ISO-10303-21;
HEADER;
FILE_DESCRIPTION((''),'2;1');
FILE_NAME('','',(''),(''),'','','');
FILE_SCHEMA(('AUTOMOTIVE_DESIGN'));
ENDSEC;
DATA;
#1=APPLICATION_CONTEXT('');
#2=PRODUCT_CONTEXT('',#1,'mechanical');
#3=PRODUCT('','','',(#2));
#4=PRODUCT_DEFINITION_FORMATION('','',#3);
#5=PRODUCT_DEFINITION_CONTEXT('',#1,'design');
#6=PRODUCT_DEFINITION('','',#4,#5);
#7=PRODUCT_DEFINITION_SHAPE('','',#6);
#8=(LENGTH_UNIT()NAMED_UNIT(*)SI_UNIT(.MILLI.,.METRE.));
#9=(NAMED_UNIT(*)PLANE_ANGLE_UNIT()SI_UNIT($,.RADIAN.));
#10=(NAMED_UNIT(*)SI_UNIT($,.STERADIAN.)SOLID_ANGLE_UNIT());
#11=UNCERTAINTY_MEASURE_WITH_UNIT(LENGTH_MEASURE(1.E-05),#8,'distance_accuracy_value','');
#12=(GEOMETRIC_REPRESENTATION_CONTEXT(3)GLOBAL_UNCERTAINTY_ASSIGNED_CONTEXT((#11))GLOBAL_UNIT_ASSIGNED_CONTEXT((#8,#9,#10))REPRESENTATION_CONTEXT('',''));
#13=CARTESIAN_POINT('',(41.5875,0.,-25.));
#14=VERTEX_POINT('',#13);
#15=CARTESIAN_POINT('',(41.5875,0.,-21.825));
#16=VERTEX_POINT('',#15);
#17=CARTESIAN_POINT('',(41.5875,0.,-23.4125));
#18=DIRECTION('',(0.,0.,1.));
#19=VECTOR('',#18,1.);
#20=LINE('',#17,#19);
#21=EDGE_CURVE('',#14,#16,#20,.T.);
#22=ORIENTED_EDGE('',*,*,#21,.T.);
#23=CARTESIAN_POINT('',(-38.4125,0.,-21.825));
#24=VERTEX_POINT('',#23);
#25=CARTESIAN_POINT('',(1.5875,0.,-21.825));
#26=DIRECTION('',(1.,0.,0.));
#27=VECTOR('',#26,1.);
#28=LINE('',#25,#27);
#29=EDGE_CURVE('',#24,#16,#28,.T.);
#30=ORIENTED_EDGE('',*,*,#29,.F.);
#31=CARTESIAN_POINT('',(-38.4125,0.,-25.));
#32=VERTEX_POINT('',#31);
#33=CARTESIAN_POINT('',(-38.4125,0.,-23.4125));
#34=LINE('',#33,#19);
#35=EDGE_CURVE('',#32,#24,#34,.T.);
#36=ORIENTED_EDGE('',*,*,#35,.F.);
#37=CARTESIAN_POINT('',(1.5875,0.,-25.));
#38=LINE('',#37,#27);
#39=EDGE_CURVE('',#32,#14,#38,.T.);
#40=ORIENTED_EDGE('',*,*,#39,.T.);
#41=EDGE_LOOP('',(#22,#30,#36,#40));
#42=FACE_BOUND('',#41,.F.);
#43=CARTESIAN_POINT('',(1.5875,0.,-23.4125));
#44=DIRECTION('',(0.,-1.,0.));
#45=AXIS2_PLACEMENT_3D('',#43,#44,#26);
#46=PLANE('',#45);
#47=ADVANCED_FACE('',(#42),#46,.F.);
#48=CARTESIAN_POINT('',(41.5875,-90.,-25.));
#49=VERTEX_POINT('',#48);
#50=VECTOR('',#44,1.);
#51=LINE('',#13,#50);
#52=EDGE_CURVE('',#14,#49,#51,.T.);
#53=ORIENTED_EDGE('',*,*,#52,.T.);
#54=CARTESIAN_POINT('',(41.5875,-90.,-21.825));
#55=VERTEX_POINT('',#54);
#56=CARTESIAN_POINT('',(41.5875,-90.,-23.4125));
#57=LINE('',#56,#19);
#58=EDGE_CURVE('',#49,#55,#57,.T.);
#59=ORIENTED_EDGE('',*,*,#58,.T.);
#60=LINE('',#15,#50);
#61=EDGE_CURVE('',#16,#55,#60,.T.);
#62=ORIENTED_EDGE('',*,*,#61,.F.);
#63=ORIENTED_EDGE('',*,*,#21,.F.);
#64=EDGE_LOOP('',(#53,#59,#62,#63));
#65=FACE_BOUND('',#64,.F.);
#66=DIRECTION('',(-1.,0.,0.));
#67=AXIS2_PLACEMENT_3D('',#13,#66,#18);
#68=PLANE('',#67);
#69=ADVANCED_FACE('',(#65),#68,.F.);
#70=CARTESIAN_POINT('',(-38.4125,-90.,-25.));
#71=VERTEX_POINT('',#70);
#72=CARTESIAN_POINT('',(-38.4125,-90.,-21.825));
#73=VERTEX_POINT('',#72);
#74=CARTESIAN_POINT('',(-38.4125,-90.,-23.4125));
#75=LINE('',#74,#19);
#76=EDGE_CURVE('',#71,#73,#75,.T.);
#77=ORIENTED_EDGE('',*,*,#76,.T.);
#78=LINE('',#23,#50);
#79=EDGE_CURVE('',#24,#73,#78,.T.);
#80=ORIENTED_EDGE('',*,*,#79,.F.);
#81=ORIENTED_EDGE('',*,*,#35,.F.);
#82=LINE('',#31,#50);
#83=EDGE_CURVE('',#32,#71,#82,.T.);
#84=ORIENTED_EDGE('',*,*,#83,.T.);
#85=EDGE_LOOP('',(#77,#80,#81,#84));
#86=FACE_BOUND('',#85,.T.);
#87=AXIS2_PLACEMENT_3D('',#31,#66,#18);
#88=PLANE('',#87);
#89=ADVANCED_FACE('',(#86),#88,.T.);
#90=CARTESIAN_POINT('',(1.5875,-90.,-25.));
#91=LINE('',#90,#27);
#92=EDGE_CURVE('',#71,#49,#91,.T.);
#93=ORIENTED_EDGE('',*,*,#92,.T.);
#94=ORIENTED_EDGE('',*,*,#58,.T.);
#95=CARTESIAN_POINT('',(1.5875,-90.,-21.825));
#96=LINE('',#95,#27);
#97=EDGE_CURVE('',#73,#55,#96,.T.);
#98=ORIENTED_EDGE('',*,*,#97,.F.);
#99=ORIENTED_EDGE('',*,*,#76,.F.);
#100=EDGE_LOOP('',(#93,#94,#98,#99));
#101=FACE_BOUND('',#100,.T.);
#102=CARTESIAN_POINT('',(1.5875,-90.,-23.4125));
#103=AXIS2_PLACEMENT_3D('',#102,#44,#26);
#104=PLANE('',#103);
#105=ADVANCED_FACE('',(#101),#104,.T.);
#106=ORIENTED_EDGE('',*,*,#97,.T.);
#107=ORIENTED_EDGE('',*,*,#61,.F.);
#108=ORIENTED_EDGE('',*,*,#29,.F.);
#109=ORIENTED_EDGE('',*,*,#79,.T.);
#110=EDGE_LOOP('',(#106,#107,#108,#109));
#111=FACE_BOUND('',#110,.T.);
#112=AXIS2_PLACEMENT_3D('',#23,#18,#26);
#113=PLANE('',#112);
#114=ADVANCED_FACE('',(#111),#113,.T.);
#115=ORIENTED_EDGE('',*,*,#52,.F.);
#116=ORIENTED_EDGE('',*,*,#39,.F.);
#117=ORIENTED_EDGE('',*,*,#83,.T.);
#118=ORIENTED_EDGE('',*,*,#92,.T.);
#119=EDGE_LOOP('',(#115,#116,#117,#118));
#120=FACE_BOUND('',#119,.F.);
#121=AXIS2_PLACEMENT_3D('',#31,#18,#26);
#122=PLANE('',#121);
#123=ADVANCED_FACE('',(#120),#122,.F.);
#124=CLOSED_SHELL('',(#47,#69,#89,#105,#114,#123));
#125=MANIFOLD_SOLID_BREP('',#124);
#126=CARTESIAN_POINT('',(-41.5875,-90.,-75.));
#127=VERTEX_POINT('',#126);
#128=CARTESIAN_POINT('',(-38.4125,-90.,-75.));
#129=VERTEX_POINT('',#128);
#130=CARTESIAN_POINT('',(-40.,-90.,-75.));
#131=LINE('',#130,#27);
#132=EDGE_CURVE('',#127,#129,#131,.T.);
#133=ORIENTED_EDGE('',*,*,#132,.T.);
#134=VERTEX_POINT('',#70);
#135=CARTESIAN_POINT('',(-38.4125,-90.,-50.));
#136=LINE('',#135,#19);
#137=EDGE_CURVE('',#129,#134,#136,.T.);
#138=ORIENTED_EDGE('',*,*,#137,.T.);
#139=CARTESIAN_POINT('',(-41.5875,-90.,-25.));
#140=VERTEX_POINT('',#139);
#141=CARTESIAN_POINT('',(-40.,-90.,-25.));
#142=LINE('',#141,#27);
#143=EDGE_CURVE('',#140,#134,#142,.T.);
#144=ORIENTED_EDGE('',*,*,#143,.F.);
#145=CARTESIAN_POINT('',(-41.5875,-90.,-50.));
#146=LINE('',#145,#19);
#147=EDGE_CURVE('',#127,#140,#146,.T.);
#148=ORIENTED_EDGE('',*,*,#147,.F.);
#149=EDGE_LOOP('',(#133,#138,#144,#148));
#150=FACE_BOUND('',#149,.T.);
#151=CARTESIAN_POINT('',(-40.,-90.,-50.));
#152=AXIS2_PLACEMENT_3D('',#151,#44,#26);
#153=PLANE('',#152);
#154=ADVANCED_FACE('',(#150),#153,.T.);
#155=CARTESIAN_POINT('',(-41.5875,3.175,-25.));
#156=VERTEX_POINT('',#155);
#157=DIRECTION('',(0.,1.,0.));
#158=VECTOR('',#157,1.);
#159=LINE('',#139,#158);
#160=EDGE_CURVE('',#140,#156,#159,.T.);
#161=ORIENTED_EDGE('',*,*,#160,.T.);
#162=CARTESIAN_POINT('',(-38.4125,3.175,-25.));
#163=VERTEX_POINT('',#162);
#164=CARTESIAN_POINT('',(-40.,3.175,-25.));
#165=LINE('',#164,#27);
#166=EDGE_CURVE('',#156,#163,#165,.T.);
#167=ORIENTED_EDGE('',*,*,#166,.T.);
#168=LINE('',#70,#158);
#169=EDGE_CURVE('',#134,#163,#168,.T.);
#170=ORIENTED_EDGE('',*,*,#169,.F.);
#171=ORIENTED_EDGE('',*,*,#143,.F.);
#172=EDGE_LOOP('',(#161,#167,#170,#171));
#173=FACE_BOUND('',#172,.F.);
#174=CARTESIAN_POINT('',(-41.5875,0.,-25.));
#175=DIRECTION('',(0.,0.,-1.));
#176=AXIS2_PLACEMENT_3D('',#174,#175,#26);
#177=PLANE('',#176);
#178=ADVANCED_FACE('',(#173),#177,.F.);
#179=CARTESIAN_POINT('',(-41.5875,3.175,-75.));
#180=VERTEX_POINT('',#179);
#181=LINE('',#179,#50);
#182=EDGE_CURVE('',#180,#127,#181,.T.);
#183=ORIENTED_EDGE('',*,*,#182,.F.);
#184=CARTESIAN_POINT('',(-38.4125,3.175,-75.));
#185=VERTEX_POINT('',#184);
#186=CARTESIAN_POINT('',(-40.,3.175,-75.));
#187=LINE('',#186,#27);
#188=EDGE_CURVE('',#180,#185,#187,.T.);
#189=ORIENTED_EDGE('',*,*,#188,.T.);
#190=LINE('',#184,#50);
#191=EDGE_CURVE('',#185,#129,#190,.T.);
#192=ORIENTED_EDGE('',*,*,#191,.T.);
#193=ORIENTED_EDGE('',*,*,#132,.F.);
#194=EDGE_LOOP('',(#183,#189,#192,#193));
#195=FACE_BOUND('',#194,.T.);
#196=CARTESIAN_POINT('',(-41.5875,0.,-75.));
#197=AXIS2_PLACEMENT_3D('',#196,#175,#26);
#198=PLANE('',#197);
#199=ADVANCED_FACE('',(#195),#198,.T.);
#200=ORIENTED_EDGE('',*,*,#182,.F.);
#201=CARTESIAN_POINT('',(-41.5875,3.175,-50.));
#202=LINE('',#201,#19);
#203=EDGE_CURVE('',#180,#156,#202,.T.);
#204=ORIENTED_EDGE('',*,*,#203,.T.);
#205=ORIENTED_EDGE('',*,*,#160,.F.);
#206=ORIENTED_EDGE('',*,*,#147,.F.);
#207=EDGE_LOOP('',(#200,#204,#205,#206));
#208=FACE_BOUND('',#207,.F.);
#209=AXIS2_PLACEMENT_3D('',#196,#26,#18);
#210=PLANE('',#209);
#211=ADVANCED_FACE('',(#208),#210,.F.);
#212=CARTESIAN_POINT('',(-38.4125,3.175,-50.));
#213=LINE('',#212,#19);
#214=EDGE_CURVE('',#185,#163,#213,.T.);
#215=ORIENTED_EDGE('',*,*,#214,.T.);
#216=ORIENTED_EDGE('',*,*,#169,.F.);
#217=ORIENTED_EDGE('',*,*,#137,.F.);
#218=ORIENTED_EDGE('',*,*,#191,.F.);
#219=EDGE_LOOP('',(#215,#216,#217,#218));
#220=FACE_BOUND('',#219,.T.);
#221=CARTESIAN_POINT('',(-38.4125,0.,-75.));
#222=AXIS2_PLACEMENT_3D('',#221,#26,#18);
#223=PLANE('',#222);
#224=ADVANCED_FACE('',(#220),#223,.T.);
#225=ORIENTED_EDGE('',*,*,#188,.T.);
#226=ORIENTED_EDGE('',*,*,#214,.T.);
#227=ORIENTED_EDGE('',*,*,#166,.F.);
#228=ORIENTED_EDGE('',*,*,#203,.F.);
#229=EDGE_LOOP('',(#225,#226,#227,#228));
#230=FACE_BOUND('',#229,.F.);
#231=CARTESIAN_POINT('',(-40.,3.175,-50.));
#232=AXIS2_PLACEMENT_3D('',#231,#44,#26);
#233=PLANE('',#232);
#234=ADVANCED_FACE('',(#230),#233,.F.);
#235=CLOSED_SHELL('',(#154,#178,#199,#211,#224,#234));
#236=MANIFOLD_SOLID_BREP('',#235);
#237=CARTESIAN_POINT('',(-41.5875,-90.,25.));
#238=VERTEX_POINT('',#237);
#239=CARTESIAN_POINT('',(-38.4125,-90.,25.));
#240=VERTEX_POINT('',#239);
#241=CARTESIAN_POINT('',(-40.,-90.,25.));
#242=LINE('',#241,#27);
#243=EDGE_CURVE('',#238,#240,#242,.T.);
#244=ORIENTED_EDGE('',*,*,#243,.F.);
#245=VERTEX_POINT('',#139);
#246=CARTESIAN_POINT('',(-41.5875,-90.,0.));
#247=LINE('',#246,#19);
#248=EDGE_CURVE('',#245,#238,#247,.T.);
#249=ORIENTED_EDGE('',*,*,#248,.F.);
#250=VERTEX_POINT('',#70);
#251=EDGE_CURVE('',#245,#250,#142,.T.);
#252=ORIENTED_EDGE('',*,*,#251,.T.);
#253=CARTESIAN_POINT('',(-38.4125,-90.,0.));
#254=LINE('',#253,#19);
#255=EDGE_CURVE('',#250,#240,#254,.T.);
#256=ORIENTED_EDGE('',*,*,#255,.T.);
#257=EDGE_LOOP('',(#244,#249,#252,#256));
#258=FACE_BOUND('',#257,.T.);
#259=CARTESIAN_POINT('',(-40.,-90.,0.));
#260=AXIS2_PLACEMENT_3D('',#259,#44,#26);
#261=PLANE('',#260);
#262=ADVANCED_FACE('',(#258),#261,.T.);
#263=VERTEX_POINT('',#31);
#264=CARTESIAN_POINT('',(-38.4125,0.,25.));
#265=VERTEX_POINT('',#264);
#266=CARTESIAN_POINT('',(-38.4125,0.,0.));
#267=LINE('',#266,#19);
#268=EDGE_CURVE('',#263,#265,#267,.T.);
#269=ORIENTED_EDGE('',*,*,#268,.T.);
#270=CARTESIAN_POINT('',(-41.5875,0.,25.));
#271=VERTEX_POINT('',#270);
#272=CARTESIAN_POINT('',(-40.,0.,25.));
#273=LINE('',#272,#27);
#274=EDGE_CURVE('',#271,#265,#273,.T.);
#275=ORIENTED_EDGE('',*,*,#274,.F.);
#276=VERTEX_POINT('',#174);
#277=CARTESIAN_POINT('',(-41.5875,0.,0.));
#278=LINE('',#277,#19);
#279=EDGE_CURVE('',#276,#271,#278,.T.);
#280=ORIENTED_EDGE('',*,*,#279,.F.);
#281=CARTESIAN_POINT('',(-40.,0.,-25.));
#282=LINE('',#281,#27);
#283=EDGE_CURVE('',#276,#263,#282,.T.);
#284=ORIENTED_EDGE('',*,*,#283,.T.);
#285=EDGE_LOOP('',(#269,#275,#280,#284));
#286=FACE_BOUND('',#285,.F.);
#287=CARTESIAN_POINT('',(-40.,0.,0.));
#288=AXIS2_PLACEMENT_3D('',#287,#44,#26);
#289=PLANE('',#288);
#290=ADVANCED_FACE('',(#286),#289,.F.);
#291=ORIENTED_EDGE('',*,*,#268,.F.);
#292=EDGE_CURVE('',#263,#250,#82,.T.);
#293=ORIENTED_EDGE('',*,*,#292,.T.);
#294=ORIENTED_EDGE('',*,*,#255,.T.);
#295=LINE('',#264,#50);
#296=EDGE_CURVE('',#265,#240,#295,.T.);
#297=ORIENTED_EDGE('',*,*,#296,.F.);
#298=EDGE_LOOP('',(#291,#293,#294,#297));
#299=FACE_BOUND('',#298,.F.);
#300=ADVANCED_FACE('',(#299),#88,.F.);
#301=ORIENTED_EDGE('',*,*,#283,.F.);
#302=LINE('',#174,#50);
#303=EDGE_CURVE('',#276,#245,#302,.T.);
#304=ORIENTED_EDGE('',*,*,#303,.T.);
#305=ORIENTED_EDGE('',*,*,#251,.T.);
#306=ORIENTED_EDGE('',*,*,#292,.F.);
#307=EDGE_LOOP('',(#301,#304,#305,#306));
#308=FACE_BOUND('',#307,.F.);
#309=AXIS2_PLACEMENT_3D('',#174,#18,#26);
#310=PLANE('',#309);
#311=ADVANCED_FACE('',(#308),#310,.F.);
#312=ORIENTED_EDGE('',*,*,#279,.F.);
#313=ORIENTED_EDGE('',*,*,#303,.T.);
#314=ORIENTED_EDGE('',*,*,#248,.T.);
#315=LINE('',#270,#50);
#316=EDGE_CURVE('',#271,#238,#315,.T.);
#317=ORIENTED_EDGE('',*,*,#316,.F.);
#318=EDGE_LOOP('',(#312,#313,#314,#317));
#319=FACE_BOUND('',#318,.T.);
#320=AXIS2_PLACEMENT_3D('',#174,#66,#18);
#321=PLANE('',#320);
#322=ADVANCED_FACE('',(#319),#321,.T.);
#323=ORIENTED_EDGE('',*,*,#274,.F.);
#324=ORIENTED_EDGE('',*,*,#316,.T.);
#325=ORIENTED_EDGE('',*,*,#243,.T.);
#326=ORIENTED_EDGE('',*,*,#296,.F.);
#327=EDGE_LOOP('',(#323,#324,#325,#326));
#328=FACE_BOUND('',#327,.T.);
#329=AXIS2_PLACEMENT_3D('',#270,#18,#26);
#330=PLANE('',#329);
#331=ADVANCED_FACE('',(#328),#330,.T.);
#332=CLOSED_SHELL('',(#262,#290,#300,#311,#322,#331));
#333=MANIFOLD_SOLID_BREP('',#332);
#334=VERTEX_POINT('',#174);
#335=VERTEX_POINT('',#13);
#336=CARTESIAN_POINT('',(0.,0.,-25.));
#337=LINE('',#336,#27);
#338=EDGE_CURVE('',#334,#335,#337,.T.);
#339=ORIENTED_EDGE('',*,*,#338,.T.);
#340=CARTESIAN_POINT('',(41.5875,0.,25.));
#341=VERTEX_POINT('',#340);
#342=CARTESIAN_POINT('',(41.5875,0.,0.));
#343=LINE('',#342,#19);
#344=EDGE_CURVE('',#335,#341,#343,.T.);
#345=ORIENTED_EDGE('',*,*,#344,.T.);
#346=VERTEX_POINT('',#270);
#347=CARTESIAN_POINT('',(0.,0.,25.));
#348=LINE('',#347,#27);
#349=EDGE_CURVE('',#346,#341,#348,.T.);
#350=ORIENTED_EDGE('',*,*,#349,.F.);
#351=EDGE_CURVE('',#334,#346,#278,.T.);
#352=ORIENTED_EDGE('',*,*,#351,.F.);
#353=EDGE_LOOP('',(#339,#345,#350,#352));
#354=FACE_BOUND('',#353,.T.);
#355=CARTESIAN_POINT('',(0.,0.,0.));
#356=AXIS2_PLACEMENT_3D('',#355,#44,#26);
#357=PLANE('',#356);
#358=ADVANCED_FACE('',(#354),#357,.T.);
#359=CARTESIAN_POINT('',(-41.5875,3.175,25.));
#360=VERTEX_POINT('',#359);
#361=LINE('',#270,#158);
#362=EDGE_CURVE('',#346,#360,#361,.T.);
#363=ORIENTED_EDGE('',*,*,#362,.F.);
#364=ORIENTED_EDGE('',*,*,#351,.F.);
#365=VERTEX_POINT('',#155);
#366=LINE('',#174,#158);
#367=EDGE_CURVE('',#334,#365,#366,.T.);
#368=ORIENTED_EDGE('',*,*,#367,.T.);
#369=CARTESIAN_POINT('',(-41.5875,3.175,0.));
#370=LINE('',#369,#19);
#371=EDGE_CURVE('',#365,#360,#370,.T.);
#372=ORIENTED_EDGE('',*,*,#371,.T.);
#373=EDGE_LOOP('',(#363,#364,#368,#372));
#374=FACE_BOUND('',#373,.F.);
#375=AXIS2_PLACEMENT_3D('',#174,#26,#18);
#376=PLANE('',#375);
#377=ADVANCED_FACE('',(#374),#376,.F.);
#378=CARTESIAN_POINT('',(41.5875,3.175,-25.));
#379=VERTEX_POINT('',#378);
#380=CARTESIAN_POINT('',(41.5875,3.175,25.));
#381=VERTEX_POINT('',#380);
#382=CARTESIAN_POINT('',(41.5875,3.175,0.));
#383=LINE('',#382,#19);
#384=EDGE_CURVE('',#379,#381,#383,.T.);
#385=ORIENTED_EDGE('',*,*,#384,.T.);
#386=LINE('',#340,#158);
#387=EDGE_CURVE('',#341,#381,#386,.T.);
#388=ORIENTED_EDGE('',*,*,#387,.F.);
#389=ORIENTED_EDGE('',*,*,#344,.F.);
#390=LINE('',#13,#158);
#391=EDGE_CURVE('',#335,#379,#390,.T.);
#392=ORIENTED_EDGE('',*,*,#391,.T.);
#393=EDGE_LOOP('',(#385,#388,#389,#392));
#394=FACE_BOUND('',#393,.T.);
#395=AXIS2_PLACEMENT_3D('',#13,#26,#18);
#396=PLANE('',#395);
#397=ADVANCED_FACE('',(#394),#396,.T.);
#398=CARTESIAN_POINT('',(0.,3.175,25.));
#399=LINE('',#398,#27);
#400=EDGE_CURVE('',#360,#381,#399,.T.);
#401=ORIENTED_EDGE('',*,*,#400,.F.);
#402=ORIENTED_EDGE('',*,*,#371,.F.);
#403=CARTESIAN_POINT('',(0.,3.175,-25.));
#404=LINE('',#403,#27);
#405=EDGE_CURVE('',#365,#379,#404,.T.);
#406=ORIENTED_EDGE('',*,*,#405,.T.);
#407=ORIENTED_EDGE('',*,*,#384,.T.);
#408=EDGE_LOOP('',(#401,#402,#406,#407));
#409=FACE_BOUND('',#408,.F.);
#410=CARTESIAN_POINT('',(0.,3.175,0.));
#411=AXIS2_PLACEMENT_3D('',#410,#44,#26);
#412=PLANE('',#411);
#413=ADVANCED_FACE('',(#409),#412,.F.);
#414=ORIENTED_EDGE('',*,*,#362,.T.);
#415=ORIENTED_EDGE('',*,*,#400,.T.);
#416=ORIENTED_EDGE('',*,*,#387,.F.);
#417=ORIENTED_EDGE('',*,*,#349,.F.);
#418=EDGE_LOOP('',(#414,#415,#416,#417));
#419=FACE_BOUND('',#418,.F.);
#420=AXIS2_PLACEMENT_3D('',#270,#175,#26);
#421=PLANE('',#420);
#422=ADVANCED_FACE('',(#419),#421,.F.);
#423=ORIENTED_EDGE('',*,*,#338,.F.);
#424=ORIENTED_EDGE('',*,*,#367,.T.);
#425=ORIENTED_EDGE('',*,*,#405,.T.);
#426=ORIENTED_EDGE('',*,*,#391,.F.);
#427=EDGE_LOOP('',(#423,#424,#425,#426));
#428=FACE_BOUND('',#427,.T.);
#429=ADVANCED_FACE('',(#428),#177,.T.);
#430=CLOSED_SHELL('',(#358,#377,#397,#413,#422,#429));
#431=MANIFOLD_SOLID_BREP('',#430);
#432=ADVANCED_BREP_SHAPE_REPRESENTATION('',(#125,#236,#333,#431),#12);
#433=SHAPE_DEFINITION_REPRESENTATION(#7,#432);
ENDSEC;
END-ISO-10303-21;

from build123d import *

# Parameters (mm, degrees)
F0_W           = 83.175
F0_H           = 50
F1_DEPTH       = 3.175
F2_W           = 3.175
F2_H           = 50
F3_DEPTH       = 90
F4_W           = 3.175
F4_H           = 50
F5_DEPTH       = 80
F6_W           = 80
F6_H           = 3.175
F7_DEPTH       = 90
F8_W           = 80
F8_H           = 3.175
F9_DEPTH       = 80
F10_W          = 3.175
F10_H          = 50
F11_DEPTH      = 90
F11_DEPTH_BACK = 3.175
F12_R          = 2.5
F13_DEPTH      = 3.175


# Not quite as in the source:
# - a length typed as a fraction of an inch, garbled in the dataset ("3 / 203.2 mm" for 3/8 in), is restored
# - a feature names something its author has since deleted; it is built from what else it names


with BuildPart() as f1:
    # F0 (on Front) → F1 (new body)
    with BuildSketch(Plane.XZ):
        Rectangle(F0_W, F0_H)
    extrude(amount=-F1_DEPTH)


with BuildPart() as f3:
    # F2 (on Front) → F3 (new body)
    with BuildSketch(Plane.XZ):
        with Locations((-40, 0)):
            Rectangle(F2_W, F2_H)
    extrude(amount=F3_DEPTH)


with BuildPart() as f5:
    # F4 (on Front) → F5 (new body)
    with BuildSketch(Plane.XZ):
        with Locations((40, 0)):
            Rectangle(F4_W, F4_H)
    extrude(amount=F5_DEPTH)

    # F12 (on face) → F13 (cut, through all)
    with BuildSketch(Plane.YZ.offset(41.5875)):
        with Locations((-40, -15)):
            Circle(F12_R)
    extrude(amount=-F13_DEPTH, mode=Mode.SUBTRACT)


with BuildPart() as f7:
    # F6 (on Front) → F7 (new body)
    with BuildSketch(Plane.XZ):
        with Locations((1.5875, -23.4125)):
            Rectangle(F6_W, F6_H)
    extrude(amount=F7_DEPTH)


with BuildPart() as f9:
    # F8 (on Front) → F9 (new body)
    with BuildSketch(Plane.XZ):
        with Locations((1.5875, 23.4125)):
            Rectangle(F8_W, F8_H)
    extrude(amount=F9_DEPTH)


with BuildPart() as f11:
    # F10 (on Front) → F11 (new body, two sides)
    with BuildSketch(Plane.XZ) as f11_sk:
        with Locations((-40, -50)):
            Rectangle(F10_W, F10_H)
    extrude(amount=F11_DEPTH)
    extrude(f11_sk.sketch, amount=-F11_DEPTH_BACK)


solid = Compound([f1.part, f3.part, f7.part, f11.part])
